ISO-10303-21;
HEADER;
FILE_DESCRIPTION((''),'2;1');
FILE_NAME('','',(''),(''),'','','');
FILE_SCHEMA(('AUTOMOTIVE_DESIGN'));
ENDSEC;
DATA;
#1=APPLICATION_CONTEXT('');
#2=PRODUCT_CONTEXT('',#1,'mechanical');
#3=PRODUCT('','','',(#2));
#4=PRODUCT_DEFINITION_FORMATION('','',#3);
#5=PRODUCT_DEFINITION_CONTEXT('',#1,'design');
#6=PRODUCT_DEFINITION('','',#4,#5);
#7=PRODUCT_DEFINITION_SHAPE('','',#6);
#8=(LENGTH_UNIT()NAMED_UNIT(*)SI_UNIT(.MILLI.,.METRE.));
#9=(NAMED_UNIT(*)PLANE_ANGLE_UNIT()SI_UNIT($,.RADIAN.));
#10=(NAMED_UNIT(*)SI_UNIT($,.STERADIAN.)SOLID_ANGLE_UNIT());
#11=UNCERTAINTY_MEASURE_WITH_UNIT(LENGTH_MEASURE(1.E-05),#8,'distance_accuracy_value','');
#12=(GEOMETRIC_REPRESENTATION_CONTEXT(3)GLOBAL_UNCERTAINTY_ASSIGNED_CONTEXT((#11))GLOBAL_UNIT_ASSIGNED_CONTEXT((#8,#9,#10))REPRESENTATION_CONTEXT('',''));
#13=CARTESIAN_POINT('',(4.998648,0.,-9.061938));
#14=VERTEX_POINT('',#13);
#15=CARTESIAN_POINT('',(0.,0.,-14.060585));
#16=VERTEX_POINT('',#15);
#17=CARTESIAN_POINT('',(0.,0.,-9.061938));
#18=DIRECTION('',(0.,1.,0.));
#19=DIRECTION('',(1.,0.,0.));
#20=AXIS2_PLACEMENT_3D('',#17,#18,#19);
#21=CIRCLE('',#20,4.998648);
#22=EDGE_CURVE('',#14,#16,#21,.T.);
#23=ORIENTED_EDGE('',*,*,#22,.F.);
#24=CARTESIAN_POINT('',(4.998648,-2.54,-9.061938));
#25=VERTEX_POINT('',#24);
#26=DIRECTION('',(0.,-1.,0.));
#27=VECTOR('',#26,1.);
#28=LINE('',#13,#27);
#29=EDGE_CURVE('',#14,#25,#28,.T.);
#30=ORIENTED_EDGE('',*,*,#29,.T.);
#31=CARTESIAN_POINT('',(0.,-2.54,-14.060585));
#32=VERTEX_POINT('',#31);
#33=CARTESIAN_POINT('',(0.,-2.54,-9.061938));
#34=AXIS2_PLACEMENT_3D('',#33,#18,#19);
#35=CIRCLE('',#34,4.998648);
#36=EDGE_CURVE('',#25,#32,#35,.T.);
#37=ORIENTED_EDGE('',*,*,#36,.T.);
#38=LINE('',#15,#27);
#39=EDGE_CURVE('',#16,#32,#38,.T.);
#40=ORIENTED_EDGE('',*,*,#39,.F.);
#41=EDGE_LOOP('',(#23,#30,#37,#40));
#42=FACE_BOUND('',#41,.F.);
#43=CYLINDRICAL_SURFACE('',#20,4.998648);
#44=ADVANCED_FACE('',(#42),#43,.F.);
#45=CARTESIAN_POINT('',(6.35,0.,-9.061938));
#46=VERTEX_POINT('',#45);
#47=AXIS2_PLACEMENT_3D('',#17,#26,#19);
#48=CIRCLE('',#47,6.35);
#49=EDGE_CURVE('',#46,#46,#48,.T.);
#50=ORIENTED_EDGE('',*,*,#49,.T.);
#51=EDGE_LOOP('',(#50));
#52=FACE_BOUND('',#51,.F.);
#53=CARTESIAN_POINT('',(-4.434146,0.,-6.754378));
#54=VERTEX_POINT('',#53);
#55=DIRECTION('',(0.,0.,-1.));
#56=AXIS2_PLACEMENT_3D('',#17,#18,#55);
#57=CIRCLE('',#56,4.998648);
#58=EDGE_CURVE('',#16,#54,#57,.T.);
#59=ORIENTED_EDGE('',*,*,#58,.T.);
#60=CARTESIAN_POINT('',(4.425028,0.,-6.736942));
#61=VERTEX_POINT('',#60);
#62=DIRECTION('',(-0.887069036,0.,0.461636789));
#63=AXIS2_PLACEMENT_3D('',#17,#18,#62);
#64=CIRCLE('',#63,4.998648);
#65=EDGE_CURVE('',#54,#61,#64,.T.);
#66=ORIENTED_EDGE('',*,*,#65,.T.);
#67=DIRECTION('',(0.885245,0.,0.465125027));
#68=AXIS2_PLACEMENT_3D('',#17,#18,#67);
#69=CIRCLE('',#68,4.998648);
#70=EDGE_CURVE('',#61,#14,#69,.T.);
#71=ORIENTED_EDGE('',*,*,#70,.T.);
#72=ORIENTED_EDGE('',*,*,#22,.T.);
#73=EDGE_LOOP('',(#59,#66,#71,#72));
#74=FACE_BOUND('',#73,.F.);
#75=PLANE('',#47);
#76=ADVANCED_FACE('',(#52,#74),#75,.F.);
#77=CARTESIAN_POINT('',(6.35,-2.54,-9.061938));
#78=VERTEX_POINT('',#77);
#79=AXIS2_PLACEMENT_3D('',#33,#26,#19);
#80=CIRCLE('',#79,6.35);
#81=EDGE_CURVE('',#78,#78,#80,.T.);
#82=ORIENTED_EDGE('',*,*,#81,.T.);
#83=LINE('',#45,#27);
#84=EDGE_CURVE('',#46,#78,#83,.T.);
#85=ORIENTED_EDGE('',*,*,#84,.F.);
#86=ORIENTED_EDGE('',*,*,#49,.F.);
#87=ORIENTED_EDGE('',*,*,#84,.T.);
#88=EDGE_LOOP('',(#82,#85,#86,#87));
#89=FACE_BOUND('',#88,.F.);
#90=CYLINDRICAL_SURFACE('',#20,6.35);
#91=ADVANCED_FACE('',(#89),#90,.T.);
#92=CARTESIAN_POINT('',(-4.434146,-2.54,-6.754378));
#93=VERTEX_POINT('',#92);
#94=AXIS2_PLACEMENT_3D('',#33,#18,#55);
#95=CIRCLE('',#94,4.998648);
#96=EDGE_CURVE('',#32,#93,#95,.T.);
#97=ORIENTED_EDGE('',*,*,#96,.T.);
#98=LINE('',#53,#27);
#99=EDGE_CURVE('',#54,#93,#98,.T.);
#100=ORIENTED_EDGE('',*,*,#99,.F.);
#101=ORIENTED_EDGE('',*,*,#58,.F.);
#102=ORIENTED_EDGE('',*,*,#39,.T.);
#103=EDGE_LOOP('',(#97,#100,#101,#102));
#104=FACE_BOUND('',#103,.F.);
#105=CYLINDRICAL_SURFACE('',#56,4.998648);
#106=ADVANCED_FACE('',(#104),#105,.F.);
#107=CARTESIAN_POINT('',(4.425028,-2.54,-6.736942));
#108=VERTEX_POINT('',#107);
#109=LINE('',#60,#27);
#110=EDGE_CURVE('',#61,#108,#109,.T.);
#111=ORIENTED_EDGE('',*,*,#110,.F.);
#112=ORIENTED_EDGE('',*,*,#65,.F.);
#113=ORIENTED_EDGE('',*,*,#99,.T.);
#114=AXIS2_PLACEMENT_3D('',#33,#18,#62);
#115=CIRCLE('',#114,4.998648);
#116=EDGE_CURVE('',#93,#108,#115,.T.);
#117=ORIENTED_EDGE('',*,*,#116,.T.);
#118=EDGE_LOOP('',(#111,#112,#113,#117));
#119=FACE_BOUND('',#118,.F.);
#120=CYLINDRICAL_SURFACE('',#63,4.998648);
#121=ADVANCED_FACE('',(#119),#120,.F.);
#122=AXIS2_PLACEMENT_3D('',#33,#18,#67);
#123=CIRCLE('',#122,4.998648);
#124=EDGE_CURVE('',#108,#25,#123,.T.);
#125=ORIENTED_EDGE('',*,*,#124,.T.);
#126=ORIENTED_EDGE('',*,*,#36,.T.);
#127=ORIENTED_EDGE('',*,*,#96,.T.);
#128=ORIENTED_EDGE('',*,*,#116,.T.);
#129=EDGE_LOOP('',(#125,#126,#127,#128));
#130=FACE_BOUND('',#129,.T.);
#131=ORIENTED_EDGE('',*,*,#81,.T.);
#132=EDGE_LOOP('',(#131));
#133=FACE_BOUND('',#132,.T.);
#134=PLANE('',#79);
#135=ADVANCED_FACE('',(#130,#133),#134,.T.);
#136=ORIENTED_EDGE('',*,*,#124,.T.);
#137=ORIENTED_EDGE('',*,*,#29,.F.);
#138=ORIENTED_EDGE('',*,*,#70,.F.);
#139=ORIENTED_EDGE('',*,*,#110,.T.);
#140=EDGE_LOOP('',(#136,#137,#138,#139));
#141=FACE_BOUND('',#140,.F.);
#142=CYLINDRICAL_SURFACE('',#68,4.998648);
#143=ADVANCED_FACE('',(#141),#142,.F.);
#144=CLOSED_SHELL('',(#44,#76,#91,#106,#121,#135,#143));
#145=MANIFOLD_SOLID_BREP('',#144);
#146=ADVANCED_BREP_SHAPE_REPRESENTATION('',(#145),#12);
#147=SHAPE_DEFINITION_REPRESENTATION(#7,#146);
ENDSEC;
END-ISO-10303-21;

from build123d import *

# Parameters (mm, degrees)
F0_R     = 6.35
F1_DEPTH = 2.54


# Not quite as in the source:
# - a feature names something its author has since deleted; it is built from what else it names


with BuildPart() as f1:
    # F0 (on Front) → F1 (new body)
    with BuildSketch(Plane.XZ):
        with Locations((0, -9.0619377949)):
            Circle(F0_R)
        with BuildLine():
            ThreePointArc((4.4250278693, -6.7369416578), (4.8531244574, -7.864581673), (4.9986476853, -9.0619377949))
            ThreePointArc((4.9986476853, -9.0619377949), (3.534577675, -12.59651547), (0, -14.0605854803))
            ThreePointArc((0, -14.0605854803), (-4.2732397818, -11.6553718984), (-4.434145585, -6.7543781288))
            ThreePointArc((-4.434145585, -6.7543781288), (-0.0098382323, -4.0632997914), (4.4250278693, -6.7369416578))
        make_face(mode=Mode.SUBTRACT)
    extrude(amount=F1_DEPTH)


solid = f1.part
